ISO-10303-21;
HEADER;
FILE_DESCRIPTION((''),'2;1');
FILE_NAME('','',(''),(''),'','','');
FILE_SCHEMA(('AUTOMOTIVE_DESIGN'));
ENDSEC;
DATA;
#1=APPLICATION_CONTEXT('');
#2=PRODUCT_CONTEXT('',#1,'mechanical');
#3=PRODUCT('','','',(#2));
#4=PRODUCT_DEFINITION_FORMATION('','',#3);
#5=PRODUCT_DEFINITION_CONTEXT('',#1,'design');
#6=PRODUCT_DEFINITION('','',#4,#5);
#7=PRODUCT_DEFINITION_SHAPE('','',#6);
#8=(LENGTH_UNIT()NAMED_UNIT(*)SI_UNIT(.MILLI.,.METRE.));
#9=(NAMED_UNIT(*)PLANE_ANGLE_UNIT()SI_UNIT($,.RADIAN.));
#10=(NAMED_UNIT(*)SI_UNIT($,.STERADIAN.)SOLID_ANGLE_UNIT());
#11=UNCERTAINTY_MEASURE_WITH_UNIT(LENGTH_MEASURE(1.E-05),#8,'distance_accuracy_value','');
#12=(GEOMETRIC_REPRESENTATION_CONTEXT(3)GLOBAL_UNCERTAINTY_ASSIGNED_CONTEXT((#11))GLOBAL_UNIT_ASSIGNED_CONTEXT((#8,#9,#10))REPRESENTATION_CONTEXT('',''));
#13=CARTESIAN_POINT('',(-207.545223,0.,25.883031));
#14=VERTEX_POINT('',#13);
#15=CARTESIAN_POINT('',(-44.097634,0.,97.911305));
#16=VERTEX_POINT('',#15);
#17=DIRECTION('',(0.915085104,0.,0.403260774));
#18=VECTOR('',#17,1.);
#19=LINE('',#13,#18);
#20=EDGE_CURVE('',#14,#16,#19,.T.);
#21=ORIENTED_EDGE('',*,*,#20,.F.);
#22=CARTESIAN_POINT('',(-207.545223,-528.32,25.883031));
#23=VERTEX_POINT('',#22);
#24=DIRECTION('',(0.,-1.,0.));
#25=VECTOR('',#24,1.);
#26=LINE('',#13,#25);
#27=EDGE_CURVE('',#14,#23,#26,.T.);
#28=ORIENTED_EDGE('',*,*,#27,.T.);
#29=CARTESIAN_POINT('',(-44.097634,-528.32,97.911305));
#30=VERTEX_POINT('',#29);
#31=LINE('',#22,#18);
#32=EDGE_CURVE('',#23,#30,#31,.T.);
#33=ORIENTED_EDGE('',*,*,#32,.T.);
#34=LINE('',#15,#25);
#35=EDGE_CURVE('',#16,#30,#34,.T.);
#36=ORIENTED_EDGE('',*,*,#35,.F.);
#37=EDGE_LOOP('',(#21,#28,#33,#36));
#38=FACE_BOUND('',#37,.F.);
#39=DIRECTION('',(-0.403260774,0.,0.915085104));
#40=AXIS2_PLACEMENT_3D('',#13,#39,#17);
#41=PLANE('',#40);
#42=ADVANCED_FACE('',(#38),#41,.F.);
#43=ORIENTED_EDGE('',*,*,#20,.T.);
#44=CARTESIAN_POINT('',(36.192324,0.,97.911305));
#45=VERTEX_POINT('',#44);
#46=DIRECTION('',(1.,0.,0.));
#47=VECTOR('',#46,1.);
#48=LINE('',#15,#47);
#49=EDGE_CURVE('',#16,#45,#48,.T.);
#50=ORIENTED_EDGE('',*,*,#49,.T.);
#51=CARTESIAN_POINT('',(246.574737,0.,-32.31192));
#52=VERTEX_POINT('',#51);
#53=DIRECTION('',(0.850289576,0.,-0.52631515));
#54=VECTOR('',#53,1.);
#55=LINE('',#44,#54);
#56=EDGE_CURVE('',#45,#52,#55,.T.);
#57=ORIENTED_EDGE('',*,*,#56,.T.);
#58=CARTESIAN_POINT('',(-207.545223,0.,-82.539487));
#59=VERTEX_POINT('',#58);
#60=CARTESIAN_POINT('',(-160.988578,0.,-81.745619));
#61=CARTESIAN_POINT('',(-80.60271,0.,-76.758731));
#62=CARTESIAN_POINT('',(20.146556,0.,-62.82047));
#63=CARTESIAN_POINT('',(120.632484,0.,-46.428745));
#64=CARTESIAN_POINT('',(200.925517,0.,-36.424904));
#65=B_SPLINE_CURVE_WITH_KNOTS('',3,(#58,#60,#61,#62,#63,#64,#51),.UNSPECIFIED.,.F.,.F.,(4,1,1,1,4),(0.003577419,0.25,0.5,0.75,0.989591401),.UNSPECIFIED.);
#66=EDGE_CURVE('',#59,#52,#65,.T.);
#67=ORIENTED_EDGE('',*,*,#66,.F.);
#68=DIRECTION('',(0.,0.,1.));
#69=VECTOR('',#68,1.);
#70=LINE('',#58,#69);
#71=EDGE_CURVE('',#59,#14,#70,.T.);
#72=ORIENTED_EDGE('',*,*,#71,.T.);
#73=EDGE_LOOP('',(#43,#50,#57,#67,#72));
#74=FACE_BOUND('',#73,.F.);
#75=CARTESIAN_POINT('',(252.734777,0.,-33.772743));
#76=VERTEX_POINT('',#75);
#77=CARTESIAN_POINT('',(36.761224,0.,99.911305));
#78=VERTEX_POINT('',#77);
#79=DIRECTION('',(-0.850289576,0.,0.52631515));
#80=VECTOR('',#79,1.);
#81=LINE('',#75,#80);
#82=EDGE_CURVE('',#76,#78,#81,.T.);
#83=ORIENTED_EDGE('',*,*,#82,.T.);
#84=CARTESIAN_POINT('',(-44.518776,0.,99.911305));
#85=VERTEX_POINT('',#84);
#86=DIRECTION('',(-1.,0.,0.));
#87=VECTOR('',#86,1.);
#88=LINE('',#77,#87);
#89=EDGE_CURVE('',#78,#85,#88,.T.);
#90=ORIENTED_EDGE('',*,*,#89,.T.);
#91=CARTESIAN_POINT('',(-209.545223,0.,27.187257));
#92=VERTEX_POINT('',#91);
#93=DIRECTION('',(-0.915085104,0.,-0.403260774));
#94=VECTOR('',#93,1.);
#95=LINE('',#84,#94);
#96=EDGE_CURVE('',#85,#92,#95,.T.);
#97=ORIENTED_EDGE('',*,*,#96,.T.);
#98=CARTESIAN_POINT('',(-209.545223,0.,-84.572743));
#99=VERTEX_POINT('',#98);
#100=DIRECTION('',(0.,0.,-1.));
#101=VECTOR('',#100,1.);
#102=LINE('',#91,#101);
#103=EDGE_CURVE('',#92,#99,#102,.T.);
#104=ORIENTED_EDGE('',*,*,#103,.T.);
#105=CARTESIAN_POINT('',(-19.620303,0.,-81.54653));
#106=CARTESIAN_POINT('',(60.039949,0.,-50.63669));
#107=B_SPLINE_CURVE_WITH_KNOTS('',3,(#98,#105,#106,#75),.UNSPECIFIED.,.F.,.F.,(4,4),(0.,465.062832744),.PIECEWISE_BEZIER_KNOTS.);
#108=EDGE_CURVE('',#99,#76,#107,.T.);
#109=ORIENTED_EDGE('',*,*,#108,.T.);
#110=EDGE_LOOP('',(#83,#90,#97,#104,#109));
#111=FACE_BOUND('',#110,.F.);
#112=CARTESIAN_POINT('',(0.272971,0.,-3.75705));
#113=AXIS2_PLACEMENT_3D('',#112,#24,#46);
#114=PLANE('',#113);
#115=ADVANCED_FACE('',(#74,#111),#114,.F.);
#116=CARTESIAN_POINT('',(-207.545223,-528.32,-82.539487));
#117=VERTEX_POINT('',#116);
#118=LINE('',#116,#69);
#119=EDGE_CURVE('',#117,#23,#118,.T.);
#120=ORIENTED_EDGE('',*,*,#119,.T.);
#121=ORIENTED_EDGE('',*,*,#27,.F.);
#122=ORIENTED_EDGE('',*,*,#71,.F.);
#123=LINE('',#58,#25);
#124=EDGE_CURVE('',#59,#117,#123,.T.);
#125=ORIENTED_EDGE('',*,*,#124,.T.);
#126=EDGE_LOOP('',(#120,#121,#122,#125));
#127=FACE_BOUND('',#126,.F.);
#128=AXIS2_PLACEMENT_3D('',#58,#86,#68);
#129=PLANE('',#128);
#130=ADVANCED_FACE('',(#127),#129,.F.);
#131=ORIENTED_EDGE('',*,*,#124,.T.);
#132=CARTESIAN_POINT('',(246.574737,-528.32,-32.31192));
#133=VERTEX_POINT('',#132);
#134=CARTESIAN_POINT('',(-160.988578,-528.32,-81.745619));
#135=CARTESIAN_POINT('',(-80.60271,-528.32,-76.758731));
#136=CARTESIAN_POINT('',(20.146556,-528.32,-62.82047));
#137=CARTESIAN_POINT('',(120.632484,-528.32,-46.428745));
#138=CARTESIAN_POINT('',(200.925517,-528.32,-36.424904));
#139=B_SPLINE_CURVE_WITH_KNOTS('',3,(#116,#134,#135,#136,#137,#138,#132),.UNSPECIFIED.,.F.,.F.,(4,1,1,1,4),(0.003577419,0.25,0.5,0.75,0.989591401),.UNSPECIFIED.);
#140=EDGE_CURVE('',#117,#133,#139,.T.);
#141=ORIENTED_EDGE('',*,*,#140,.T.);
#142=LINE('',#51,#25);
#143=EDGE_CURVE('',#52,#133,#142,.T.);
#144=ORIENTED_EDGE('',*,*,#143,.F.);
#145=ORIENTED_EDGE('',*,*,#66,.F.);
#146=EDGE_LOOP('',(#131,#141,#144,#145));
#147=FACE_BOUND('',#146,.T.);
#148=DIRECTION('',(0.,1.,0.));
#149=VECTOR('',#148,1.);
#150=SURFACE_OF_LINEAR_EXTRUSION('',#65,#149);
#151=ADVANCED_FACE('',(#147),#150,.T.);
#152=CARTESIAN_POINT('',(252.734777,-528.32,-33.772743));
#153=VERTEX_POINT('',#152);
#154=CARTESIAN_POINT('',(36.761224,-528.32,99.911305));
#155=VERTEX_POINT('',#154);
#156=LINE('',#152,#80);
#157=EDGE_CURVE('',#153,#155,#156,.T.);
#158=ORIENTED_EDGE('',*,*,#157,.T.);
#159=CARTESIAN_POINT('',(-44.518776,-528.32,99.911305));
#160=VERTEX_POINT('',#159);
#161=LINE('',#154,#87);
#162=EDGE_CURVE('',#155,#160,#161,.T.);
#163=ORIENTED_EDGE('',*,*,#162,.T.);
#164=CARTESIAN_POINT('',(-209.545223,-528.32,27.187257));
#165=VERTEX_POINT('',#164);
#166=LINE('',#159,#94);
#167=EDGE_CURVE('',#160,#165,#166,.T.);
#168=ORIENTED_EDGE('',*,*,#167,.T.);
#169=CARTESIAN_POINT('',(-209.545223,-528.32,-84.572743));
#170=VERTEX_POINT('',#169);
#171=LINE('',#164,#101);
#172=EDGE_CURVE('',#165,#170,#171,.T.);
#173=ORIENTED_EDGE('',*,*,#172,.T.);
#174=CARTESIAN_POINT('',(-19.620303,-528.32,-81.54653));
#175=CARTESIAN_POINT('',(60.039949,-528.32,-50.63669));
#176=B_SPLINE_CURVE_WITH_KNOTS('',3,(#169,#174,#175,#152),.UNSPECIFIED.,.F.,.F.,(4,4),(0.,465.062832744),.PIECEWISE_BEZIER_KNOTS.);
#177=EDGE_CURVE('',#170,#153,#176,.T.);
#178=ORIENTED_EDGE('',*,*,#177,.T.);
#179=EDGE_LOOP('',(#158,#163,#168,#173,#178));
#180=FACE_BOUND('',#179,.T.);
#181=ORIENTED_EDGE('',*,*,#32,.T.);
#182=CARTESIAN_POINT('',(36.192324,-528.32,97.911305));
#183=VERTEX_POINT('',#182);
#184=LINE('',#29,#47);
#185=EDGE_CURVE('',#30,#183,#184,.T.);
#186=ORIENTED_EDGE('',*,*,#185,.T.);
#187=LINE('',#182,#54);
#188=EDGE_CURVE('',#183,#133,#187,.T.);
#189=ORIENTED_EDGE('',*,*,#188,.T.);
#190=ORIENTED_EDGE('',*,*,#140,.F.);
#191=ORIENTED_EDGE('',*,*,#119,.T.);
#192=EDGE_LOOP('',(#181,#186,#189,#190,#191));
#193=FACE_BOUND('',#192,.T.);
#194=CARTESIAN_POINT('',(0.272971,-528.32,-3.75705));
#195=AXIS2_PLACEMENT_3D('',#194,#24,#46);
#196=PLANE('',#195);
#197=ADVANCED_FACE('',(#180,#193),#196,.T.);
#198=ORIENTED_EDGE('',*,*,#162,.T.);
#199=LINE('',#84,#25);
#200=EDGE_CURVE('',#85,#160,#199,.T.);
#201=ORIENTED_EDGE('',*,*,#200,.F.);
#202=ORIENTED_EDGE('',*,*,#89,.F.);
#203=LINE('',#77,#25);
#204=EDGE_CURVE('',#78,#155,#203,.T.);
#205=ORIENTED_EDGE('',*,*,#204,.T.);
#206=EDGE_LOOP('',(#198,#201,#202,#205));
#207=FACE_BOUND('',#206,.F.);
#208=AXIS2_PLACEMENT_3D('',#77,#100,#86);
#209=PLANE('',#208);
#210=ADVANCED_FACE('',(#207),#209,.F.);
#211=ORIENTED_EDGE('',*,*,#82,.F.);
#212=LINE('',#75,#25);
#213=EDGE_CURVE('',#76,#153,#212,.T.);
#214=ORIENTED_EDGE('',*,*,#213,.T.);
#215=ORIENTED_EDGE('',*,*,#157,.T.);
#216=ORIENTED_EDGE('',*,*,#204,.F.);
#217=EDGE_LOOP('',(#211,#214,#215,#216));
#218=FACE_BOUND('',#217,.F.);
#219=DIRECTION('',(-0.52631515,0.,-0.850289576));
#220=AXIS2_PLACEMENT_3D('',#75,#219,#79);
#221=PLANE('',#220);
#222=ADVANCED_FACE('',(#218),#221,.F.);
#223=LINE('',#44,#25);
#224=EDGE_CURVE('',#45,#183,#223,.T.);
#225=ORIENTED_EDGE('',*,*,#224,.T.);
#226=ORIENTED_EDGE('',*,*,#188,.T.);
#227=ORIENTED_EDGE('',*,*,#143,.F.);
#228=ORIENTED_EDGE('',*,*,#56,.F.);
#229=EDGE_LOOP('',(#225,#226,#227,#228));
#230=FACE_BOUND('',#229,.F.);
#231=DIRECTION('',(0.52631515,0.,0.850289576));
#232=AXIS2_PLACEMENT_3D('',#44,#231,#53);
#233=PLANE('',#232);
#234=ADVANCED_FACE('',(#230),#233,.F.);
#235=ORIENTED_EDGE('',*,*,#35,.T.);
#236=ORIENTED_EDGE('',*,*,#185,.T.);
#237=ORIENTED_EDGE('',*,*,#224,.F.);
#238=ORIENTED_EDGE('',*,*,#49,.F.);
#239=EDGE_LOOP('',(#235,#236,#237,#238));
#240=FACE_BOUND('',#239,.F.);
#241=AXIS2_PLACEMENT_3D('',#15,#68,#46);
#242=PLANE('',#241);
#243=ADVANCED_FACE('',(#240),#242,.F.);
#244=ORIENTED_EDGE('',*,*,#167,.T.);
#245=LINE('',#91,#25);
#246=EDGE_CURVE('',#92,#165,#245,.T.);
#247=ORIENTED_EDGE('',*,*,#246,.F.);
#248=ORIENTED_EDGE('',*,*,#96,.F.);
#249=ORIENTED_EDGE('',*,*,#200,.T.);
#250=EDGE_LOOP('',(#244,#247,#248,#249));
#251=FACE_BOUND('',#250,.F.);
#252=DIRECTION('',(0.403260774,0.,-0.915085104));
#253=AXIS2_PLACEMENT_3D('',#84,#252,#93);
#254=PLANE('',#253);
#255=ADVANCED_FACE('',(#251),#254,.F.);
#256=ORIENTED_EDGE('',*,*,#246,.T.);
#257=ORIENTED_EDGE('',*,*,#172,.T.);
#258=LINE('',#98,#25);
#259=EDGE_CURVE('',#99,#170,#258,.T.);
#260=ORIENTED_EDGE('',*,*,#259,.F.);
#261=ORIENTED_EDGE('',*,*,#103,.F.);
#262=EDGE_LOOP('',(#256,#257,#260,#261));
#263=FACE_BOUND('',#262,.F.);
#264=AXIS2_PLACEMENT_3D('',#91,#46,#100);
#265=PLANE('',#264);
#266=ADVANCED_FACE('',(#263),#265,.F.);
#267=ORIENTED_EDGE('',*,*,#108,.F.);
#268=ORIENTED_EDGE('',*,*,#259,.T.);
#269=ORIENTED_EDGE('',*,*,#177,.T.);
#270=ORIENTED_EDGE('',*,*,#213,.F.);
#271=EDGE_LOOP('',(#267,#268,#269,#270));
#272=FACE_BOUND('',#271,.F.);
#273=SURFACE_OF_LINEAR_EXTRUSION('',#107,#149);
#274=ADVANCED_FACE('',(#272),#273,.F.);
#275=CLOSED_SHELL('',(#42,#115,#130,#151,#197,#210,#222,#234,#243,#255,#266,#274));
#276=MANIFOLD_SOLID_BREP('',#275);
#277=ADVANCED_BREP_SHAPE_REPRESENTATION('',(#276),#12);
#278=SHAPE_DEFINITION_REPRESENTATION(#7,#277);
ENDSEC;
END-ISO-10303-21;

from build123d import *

# Parameters (mm, degrees)
F1_DEPTH = 528.32


# Not quite as in the source:
# - ends of sketch curves that miss each other by under 0.0002 mm in the source are joined


with BuildPart() as f1:
    # F0 (on Front) → F1 (new body)
    with BuildSketch(Plane.XZ):
        with BuildLine():
            Line((-209.5452234585, 27.1872572403), (-209.5452234585, -84.5727427597))
            add(Edge.make_bspline(
                [(-209.5452234585, -84.5727427597), (-19.6203030646, -81.5465301275), (60.0399486721, -50.63669011), (252.7347765415, -33.7727427597)],
                knots=[0, 0, 0, 0, 465.0628327441, 465.0628327441, 465.0628327441, 465.0628327441], degree=3))
            Line((252.7347765415, -33.7727427597), (36.7612242285, 99.9113052838))
            Line((36.7612242285, 99.9113052838), (-44.5187757715, 99.9113052838))
            Line((-44.5187757715, 99.9113052838), (-209.5452234585, 27.1872572403))
        make_face()
        with BuildLine():
            Line((-44.0976344097, 97.9113052838), (36.192323926, 97.9113052838))
            Line((36.192323926, 97.9113052838), (246.5747366709, -32.311920068))
            add(Edge.make_bspline(
                [(-207.545223454, -82.5394870183), (-160.9885784093, -81.7456194303), (-80.6027101112, -76.7587307387), (20.1465558538, -62.8204704396), (120.6324842882, -46.4287449505), (200.9255170344, -36.424903597), (246.5747366709, -32.311920068)],
                knots=[0.003577419, 0.003577419, 0.003577419, 0.003577419, 0.25, 0.5, 0.75, 0.9895914005, 0.9895914005, 0.9895914005, 0.9895914005], degree=3))
            Line((-207.545223454, -82.5394870183), (-207.5452234585, 25.8830305123))
            Line((-207.5452234585, 25.8830305123), (-44.0976344097, 97.9113052838))
        make_face(mode=Mode.SUBTRACT)
    extrude(amount=F1_DEPTH)


solid = f1.part
